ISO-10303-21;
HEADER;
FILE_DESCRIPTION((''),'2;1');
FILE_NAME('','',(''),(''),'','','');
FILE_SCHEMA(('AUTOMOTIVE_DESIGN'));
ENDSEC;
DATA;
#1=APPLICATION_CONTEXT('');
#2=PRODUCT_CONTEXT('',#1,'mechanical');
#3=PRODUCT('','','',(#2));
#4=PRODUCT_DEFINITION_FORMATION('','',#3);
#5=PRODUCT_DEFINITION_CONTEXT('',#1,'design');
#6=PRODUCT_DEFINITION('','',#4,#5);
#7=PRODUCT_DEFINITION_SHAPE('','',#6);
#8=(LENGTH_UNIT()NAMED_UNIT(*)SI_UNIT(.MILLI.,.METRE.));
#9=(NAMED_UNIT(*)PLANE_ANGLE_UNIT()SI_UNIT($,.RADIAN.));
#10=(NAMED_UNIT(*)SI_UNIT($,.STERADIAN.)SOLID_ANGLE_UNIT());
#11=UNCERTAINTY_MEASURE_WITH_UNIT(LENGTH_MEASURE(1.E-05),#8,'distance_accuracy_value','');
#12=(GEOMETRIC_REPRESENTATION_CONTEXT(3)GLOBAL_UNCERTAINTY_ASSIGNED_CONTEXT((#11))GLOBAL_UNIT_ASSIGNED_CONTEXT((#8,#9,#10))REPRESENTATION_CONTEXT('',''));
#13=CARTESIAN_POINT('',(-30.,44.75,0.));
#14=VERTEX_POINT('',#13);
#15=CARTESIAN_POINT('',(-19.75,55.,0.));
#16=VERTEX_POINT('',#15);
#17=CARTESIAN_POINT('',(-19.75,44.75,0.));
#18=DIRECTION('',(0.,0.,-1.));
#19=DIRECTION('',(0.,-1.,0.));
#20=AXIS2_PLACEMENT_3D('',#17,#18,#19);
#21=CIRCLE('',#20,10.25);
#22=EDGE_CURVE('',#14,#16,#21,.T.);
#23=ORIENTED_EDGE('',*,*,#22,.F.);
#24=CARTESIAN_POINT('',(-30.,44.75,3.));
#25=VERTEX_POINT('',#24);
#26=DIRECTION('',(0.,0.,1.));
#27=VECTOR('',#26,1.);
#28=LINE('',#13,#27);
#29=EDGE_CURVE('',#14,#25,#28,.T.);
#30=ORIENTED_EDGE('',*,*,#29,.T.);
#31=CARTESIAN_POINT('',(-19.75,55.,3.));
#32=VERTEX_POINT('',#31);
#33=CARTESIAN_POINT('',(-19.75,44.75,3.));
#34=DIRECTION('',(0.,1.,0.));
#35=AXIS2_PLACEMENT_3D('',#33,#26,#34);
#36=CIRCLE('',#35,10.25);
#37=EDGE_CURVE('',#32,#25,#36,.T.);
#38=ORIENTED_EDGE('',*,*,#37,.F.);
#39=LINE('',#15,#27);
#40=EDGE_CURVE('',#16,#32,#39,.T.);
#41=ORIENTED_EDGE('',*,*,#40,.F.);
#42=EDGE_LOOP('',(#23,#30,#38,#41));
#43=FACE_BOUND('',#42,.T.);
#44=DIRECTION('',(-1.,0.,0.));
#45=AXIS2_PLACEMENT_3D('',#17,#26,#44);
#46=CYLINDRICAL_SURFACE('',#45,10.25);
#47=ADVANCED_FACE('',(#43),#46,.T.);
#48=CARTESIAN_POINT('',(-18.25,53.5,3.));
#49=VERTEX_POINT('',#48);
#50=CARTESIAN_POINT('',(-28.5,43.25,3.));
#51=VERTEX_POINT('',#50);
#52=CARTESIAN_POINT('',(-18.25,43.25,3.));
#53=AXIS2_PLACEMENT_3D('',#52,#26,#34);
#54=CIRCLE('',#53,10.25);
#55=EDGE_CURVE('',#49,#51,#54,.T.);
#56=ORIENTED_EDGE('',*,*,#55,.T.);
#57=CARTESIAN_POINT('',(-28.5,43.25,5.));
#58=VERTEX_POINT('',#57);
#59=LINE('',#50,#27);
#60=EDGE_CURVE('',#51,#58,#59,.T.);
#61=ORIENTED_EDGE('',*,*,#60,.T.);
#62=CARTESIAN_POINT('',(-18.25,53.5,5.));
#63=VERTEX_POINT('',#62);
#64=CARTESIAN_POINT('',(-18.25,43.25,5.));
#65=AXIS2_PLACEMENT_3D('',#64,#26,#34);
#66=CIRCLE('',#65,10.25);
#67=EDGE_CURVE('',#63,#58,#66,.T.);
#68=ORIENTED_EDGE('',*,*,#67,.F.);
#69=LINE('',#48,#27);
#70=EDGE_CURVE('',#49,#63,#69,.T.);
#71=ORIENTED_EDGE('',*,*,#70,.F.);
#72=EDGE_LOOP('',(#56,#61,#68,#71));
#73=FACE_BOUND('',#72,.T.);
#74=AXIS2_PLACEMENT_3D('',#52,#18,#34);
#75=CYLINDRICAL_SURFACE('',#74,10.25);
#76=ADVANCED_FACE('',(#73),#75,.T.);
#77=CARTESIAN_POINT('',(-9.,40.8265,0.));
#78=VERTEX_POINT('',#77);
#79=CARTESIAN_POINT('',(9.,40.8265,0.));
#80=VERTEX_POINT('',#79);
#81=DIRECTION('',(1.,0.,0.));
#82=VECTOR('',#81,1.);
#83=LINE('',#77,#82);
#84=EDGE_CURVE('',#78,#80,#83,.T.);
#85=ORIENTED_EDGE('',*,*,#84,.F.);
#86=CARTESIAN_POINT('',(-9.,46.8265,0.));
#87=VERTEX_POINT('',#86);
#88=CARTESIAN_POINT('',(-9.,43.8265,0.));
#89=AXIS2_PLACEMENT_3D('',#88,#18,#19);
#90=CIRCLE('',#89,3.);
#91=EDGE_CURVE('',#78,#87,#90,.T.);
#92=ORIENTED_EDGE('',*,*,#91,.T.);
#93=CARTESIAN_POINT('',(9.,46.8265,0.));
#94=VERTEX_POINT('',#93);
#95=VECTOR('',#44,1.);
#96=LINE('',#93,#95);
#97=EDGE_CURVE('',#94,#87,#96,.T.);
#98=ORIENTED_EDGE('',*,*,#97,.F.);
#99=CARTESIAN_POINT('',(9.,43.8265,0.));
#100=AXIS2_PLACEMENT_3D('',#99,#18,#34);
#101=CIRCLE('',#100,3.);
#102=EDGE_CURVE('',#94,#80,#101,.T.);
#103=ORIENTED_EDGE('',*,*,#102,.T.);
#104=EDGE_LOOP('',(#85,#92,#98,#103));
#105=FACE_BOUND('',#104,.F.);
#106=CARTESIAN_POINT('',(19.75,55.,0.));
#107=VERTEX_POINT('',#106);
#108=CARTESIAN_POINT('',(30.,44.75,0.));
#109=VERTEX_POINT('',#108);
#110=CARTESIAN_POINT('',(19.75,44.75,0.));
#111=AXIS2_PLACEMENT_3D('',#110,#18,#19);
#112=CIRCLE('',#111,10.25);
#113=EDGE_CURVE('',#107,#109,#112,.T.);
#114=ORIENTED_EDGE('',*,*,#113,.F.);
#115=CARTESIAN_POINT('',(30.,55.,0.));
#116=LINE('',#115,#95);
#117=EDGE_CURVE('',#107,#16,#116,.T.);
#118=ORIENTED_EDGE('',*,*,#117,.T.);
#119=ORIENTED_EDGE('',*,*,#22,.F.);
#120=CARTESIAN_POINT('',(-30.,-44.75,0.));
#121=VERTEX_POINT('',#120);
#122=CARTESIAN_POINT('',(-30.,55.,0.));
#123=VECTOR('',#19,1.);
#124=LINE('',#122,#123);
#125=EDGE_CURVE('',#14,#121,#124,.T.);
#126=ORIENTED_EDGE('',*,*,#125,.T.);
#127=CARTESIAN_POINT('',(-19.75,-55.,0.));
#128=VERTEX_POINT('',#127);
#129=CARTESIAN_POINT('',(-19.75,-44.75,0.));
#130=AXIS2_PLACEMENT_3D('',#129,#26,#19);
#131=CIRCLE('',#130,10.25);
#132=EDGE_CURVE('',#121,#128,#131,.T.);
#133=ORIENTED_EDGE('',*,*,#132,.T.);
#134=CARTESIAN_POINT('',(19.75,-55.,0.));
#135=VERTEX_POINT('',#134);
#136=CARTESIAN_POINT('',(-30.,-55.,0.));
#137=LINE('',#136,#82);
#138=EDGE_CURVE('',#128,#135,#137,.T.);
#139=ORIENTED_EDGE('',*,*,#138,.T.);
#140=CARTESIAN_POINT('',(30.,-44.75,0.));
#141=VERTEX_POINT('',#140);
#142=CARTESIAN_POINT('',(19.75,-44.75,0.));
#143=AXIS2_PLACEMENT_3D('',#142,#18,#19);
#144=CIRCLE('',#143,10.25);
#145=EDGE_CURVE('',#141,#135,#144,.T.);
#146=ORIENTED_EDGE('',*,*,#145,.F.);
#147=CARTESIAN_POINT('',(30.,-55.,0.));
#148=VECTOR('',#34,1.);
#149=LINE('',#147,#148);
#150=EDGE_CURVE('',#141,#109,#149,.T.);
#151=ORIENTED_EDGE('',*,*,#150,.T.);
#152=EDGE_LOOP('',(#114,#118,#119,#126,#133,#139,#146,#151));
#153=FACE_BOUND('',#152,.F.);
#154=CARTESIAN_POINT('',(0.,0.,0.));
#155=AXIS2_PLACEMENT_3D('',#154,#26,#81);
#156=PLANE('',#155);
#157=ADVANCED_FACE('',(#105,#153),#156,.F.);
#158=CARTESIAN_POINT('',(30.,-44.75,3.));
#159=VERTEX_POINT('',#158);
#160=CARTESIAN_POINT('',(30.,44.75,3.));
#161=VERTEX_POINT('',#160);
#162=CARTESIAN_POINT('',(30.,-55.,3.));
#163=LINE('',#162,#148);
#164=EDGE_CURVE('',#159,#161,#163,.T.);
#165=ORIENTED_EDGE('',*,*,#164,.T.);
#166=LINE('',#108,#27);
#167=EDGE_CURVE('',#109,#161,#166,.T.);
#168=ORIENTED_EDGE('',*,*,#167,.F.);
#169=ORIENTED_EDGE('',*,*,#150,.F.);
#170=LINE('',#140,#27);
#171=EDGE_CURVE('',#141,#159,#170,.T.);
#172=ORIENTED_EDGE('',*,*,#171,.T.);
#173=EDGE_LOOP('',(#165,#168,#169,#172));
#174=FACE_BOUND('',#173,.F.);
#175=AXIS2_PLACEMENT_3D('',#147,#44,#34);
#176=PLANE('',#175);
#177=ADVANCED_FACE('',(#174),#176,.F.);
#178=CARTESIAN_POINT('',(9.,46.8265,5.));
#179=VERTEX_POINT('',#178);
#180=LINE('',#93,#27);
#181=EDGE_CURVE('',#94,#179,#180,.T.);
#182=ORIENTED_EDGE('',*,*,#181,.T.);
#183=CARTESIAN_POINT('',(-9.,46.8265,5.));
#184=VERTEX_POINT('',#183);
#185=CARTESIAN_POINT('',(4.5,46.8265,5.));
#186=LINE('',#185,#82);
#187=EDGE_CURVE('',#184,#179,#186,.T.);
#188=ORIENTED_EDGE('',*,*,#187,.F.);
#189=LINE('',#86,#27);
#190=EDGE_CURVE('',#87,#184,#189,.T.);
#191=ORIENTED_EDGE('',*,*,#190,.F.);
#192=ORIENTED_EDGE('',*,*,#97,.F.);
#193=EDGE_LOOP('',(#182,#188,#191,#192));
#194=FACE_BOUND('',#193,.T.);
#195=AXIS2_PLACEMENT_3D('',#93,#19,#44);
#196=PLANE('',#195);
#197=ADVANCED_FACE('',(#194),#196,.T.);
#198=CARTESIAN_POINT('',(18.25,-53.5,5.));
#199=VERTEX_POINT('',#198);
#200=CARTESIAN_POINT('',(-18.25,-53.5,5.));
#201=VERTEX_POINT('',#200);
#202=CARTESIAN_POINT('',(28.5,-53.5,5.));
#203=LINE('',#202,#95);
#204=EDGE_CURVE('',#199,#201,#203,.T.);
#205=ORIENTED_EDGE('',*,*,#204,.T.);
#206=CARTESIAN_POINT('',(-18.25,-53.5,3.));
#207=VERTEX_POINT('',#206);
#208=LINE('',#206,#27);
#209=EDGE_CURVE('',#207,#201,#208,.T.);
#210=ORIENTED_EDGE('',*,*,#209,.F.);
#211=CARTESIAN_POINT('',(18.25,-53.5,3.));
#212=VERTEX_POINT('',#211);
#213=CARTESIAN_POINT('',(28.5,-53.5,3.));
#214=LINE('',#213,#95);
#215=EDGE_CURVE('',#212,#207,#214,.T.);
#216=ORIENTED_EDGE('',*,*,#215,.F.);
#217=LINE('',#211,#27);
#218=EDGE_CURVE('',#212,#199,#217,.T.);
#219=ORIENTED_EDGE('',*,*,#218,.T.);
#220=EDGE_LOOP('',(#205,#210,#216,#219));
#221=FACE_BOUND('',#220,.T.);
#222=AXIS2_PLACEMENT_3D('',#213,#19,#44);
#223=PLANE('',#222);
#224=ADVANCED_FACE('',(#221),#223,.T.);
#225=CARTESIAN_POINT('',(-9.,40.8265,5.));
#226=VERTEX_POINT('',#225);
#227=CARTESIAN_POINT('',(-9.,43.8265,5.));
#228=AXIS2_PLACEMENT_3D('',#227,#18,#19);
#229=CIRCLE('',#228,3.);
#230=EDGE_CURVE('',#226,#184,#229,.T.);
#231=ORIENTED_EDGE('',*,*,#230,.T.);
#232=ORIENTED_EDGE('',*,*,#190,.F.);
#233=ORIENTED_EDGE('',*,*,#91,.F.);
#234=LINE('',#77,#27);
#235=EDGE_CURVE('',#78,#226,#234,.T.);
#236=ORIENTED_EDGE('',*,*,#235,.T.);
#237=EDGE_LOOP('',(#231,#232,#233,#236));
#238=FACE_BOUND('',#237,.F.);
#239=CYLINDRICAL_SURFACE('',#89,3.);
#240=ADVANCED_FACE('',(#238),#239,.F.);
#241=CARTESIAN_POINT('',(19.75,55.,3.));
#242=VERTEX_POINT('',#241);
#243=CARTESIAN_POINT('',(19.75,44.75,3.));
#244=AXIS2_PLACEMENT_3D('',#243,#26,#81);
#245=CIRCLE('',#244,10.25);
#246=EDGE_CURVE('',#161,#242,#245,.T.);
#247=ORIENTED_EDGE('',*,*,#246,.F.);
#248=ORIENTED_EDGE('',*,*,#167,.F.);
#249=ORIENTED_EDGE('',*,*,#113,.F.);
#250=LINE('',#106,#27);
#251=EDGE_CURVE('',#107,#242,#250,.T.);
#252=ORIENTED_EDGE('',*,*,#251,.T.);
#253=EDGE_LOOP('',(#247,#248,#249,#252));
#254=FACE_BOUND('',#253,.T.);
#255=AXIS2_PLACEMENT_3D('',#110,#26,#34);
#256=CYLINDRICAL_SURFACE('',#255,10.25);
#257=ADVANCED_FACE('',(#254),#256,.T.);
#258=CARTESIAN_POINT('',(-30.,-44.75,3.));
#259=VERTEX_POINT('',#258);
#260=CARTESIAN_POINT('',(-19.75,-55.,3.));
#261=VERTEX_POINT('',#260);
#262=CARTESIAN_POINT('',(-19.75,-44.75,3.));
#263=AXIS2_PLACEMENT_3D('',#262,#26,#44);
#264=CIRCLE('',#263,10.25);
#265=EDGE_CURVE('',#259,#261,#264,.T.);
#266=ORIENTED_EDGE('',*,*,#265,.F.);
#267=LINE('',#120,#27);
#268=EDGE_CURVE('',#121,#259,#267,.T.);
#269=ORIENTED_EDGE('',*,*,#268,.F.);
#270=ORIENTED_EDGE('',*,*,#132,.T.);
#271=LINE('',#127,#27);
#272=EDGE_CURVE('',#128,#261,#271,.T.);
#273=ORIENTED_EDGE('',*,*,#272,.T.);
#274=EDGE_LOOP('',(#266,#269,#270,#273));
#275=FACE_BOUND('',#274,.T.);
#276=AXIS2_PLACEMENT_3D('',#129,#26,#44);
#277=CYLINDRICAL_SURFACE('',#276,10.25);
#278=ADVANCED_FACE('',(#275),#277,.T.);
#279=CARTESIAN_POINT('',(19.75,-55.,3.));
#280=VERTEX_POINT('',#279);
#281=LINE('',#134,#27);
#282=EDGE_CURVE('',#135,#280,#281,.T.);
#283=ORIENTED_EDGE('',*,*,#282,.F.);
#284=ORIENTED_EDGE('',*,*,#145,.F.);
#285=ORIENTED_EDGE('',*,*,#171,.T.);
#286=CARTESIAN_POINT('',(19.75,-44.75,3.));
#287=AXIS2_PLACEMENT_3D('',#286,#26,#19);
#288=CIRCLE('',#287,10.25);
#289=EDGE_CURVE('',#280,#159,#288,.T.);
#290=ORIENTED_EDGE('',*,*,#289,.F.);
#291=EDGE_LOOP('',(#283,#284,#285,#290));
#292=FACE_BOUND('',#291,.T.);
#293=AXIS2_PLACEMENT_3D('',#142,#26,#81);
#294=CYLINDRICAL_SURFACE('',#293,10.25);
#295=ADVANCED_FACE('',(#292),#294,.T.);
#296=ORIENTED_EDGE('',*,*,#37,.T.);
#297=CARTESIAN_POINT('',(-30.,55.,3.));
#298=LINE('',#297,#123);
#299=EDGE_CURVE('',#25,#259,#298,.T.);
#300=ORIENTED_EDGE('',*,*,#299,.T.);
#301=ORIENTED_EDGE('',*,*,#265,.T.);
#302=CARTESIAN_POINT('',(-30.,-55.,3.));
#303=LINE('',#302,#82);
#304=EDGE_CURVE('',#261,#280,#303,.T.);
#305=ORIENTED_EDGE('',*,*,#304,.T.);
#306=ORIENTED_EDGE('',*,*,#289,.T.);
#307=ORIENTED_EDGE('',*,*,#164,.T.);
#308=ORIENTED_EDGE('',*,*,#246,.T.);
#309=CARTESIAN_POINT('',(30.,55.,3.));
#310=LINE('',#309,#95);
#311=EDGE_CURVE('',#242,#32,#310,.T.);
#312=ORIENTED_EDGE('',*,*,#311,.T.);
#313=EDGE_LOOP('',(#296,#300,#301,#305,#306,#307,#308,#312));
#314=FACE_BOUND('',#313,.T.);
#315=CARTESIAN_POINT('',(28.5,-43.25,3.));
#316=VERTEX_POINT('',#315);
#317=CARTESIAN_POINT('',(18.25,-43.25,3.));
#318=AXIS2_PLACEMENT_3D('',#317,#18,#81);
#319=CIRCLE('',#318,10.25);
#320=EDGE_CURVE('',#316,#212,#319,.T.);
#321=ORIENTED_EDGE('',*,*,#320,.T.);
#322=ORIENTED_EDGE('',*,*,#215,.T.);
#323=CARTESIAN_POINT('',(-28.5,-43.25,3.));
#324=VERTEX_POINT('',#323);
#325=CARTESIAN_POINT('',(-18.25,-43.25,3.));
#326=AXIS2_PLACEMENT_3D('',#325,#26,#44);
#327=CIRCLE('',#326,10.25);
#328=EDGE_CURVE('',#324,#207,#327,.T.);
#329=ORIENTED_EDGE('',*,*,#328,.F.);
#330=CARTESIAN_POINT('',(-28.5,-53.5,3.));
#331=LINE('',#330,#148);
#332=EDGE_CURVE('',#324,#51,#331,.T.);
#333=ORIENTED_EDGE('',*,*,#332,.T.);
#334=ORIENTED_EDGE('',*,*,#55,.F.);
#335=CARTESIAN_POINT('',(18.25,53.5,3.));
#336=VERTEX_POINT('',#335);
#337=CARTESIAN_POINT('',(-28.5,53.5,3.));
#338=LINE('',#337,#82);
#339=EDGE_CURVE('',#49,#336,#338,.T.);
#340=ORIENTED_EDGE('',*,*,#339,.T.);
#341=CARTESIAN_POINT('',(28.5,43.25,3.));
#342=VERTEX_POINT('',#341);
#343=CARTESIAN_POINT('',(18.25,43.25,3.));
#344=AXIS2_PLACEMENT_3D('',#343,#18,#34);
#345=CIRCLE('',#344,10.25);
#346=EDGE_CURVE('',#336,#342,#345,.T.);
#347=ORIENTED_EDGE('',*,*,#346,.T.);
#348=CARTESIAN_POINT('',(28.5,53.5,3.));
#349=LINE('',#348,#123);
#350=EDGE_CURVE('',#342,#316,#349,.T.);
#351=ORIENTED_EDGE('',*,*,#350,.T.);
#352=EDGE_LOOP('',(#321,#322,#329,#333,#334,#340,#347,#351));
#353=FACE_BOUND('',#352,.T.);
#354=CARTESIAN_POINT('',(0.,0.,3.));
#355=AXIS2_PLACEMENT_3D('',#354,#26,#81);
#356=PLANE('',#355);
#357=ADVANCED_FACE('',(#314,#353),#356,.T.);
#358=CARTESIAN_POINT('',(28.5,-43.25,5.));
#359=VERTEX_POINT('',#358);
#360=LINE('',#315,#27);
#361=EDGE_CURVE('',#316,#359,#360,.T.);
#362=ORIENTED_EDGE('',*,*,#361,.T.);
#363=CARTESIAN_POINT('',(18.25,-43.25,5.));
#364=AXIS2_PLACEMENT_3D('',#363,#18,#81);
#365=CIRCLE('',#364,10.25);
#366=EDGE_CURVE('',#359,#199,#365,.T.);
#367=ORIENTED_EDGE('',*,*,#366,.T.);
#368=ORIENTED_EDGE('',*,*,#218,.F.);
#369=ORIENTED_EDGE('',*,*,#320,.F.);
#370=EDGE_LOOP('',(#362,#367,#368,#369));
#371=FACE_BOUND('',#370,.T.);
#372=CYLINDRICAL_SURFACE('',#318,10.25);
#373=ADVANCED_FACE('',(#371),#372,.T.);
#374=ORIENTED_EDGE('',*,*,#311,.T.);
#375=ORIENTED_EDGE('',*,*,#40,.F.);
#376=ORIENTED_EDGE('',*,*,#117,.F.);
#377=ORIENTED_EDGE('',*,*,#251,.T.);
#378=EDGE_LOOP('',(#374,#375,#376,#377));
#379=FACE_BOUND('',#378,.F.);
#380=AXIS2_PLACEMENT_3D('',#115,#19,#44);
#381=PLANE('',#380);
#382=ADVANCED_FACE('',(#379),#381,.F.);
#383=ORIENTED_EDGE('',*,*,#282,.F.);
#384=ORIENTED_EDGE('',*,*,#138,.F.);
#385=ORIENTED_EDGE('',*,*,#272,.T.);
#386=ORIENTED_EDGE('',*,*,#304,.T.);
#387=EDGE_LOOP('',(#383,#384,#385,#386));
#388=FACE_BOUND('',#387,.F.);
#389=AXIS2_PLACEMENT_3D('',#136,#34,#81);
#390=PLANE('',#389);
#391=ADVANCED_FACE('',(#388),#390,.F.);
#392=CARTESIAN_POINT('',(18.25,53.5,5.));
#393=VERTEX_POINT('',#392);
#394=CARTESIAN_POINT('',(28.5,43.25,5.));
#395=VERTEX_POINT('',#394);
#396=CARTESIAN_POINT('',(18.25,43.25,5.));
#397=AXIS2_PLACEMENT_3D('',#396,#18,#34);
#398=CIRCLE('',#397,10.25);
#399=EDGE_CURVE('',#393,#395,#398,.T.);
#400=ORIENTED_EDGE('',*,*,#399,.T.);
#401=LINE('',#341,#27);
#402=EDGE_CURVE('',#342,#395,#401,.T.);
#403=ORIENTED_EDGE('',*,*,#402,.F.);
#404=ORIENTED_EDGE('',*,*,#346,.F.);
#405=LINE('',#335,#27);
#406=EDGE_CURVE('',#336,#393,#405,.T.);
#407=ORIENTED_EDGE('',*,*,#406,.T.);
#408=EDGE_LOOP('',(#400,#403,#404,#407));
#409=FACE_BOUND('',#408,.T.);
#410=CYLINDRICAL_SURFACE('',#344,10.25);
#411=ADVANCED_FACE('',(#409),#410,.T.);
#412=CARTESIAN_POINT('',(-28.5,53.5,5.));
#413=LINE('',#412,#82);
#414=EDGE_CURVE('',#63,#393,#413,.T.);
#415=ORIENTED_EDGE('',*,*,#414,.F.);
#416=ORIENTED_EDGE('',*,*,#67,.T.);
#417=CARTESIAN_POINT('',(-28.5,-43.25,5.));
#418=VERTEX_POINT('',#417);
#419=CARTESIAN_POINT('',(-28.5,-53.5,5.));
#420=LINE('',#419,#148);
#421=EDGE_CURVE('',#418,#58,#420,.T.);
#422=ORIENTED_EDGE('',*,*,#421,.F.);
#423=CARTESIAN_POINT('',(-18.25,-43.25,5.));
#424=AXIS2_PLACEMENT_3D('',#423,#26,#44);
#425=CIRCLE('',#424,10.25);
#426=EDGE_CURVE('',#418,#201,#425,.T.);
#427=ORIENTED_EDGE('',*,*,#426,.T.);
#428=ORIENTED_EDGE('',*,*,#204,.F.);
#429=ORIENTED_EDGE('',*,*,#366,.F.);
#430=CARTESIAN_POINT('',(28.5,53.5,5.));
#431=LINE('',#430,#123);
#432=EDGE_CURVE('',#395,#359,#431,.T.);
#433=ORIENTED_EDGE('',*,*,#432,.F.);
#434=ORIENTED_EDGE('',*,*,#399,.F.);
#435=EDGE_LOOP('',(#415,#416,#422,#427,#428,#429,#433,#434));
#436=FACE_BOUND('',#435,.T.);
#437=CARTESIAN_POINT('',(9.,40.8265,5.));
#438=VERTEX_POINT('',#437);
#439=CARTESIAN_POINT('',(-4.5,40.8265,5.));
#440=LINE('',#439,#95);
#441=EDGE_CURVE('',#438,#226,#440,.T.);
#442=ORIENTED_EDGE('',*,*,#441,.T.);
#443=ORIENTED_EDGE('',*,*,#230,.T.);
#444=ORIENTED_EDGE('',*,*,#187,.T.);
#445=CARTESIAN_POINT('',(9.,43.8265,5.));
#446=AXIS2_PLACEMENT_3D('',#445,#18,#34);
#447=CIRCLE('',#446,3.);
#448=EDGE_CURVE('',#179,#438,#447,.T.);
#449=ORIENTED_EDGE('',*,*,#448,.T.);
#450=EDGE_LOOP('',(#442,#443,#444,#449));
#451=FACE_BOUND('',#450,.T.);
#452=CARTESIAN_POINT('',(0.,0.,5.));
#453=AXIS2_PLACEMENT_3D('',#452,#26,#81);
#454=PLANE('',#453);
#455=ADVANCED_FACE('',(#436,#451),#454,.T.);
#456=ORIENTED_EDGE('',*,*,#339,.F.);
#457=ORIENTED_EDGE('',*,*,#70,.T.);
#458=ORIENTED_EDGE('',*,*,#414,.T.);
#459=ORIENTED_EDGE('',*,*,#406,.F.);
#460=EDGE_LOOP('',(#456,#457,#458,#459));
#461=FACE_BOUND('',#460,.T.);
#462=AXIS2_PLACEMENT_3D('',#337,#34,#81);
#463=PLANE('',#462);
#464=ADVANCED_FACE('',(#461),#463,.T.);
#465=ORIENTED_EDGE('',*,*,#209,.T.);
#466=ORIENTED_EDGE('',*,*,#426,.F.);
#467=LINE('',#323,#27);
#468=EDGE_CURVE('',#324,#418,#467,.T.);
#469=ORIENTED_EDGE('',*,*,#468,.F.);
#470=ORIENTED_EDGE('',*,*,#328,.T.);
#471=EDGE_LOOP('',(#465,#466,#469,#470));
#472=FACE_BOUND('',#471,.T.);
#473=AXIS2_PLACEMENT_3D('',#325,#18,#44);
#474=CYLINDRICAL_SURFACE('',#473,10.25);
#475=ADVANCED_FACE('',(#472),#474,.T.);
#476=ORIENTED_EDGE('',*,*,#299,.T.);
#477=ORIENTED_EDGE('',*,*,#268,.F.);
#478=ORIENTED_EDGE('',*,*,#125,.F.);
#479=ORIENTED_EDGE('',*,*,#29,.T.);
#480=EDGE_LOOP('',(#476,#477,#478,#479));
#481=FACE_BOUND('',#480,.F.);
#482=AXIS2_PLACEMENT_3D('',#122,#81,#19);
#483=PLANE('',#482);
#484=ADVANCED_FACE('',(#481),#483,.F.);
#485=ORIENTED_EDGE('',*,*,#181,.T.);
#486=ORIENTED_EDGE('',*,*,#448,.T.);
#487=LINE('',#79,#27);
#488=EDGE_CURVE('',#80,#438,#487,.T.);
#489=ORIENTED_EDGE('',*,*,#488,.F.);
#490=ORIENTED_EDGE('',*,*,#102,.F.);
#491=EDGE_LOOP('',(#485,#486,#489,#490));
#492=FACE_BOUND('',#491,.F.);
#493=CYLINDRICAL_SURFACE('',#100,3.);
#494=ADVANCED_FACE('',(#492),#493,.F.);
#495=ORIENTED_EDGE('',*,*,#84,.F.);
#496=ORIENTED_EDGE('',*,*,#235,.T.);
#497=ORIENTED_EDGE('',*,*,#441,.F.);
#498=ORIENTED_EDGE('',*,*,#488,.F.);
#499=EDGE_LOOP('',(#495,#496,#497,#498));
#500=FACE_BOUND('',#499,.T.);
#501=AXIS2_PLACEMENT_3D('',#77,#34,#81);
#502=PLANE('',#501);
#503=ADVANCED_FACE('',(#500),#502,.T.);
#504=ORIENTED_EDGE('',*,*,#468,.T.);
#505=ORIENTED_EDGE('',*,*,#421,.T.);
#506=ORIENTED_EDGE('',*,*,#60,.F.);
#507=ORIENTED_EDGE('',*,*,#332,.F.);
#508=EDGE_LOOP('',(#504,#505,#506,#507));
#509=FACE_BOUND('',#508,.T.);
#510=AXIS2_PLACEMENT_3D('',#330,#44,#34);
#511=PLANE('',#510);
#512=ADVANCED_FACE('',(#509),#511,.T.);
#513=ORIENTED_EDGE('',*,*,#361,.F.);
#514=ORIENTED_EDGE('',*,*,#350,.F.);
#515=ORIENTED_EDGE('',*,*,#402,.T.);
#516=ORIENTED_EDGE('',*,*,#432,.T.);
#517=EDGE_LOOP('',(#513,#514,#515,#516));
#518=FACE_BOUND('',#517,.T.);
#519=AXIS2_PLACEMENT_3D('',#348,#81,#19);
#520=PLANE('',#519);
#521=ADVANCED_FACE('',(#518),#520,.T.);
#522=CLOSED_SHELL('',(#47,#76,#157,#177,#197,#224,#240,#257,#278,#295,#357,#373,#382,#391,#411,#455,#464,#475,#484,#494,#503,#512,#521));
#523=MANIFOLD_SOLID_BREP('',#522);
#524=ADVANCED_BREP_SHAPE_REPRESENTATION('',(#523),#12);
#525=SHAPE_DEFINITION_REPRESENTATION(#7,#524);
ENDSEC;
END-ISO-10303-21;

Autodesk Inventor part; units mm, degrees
ref_plane "YZ Plane" through (0, 0, 0) normal (1, 0, 0) x (0, 1, 0)
ref_plane "XZ Plane" through (0, 0, 0) normal (0, 1, 0) x (-1, 0, 0)
ref_plane "XY Plane" through (0, 0, 0) normal (0, 0, 1) x (1, 0, 0)
sketch "Sketch1" plane through (0, 0, 0) normal (0, 0, 1) x (1, 0, 0)
  line L0 (0, 0) -> (64.8574, 0) construction
  line L1 (-30, -55) -> (30, -55)
  line L2 (30, -55) -> (30, 55)
  line L3 (30, 55) -> (-30, 55)
  line L4 (-30, 55) -> (-30, -55)
  line L5 (-30, -55) -> (30, 55) construction
  line L6 (30, -55) -> (-30, 55) construction
  dimension "d0" = 60
  dimension "d1" = 110
extrude "Extrusion1" add sketch "Sketch1" along normal blind 3
fillet "Fillet1" radius 10.25 4 edges at (30, 55, 1.5) (-30, 55, 1.5) (30, -55, 1.5) (-30, -55, 1.5)
sketch "Sketch2" plane through (0, 0, 3) normal (0, 0, 1) x (1, 0, 0)
  line L0 (0, 0) -> (47.0336, 0) construction
  line L1 (-30, -55) -> (30, -55)
  line L2 (30, -55) -> (30, 55)
  line L3 (30, 55) -> (-30, 55)
  line L4 (-30, 55) -> (-30, -55)
  line L5 (-30, -55) -> (30, 55) construction
  line L6 (30, -55) -> (-30, 55) construction
  line L7 (-28.5, 53.5) -> (28.5, 53.5)
  line L8 (28.5, 53.5) -> (28.5, -53.5)
  line L9 (28.5, -53.5) -> (-28.5, -53.5)
  line L10 (-28.5, -53.5) -> (-28.5, 53.5)
  dimension "d5" = 60
  dimension "d6" = 110
  dimension "d7" = 1.5
extrude "Extrusion2" add sketch "Sketch2" along normal blind 2 contours L7 L8 L9 L10
fillet "Fillet2" radius 10.25 4 edges at (28.5, 53.5, 4) (-28.5, 53.5, 4) (-28.5, -53.5, 4) (28.5, -53.5, 4)
sketch "Sketch3" plane through (0, 0, 0) normal (0, 0, -1) x (-1, 0, 0)
  line L0 (9, 43.8265) -> (-9, 43.8265) construction
  line L1 (9, 45.3265) -> (-9, 45.3265)
  line L2 (-9, 42.3265) -> (9, 42.3265)
  arc A0 (9, 42.3265) -> (9, 45.3265) centre (9, 43.8265) ccw
  arc A1 (-9, 45.3265) -> (-9, 42.3265) centre (-9, 43.8265) ccw
  line L3 (-9, 46.8265) -> (9, 46.8265)
  arc A2 (9, 40.8265) -> (9, 46.8265) centre (9, 43.8265) ccw
  line L4 (9, 40.8265) -> (-9, 40.8265)
  arc A3 (-9, 46.8265) -> (-9, 40.8265) centre (-9, 43.8265) ccw
  point P0 (0, 0)
  point P1 (0, 43.8265)
  dimension "d11" = 9
  dimension "d12" = 3
  dimension "d15" = 1.5
extrude "Extrusion3" cut sketch "Sketch3" against normal through all contours A0 L2 A1 L1 | L3 A2 L4 A3
sketch "Sketch4" plane through (0, 0, 4) normal (0, 0, -1) x (-1, 0, 0)
  point P0 (0, 0)
properties part number "BackPlate"
